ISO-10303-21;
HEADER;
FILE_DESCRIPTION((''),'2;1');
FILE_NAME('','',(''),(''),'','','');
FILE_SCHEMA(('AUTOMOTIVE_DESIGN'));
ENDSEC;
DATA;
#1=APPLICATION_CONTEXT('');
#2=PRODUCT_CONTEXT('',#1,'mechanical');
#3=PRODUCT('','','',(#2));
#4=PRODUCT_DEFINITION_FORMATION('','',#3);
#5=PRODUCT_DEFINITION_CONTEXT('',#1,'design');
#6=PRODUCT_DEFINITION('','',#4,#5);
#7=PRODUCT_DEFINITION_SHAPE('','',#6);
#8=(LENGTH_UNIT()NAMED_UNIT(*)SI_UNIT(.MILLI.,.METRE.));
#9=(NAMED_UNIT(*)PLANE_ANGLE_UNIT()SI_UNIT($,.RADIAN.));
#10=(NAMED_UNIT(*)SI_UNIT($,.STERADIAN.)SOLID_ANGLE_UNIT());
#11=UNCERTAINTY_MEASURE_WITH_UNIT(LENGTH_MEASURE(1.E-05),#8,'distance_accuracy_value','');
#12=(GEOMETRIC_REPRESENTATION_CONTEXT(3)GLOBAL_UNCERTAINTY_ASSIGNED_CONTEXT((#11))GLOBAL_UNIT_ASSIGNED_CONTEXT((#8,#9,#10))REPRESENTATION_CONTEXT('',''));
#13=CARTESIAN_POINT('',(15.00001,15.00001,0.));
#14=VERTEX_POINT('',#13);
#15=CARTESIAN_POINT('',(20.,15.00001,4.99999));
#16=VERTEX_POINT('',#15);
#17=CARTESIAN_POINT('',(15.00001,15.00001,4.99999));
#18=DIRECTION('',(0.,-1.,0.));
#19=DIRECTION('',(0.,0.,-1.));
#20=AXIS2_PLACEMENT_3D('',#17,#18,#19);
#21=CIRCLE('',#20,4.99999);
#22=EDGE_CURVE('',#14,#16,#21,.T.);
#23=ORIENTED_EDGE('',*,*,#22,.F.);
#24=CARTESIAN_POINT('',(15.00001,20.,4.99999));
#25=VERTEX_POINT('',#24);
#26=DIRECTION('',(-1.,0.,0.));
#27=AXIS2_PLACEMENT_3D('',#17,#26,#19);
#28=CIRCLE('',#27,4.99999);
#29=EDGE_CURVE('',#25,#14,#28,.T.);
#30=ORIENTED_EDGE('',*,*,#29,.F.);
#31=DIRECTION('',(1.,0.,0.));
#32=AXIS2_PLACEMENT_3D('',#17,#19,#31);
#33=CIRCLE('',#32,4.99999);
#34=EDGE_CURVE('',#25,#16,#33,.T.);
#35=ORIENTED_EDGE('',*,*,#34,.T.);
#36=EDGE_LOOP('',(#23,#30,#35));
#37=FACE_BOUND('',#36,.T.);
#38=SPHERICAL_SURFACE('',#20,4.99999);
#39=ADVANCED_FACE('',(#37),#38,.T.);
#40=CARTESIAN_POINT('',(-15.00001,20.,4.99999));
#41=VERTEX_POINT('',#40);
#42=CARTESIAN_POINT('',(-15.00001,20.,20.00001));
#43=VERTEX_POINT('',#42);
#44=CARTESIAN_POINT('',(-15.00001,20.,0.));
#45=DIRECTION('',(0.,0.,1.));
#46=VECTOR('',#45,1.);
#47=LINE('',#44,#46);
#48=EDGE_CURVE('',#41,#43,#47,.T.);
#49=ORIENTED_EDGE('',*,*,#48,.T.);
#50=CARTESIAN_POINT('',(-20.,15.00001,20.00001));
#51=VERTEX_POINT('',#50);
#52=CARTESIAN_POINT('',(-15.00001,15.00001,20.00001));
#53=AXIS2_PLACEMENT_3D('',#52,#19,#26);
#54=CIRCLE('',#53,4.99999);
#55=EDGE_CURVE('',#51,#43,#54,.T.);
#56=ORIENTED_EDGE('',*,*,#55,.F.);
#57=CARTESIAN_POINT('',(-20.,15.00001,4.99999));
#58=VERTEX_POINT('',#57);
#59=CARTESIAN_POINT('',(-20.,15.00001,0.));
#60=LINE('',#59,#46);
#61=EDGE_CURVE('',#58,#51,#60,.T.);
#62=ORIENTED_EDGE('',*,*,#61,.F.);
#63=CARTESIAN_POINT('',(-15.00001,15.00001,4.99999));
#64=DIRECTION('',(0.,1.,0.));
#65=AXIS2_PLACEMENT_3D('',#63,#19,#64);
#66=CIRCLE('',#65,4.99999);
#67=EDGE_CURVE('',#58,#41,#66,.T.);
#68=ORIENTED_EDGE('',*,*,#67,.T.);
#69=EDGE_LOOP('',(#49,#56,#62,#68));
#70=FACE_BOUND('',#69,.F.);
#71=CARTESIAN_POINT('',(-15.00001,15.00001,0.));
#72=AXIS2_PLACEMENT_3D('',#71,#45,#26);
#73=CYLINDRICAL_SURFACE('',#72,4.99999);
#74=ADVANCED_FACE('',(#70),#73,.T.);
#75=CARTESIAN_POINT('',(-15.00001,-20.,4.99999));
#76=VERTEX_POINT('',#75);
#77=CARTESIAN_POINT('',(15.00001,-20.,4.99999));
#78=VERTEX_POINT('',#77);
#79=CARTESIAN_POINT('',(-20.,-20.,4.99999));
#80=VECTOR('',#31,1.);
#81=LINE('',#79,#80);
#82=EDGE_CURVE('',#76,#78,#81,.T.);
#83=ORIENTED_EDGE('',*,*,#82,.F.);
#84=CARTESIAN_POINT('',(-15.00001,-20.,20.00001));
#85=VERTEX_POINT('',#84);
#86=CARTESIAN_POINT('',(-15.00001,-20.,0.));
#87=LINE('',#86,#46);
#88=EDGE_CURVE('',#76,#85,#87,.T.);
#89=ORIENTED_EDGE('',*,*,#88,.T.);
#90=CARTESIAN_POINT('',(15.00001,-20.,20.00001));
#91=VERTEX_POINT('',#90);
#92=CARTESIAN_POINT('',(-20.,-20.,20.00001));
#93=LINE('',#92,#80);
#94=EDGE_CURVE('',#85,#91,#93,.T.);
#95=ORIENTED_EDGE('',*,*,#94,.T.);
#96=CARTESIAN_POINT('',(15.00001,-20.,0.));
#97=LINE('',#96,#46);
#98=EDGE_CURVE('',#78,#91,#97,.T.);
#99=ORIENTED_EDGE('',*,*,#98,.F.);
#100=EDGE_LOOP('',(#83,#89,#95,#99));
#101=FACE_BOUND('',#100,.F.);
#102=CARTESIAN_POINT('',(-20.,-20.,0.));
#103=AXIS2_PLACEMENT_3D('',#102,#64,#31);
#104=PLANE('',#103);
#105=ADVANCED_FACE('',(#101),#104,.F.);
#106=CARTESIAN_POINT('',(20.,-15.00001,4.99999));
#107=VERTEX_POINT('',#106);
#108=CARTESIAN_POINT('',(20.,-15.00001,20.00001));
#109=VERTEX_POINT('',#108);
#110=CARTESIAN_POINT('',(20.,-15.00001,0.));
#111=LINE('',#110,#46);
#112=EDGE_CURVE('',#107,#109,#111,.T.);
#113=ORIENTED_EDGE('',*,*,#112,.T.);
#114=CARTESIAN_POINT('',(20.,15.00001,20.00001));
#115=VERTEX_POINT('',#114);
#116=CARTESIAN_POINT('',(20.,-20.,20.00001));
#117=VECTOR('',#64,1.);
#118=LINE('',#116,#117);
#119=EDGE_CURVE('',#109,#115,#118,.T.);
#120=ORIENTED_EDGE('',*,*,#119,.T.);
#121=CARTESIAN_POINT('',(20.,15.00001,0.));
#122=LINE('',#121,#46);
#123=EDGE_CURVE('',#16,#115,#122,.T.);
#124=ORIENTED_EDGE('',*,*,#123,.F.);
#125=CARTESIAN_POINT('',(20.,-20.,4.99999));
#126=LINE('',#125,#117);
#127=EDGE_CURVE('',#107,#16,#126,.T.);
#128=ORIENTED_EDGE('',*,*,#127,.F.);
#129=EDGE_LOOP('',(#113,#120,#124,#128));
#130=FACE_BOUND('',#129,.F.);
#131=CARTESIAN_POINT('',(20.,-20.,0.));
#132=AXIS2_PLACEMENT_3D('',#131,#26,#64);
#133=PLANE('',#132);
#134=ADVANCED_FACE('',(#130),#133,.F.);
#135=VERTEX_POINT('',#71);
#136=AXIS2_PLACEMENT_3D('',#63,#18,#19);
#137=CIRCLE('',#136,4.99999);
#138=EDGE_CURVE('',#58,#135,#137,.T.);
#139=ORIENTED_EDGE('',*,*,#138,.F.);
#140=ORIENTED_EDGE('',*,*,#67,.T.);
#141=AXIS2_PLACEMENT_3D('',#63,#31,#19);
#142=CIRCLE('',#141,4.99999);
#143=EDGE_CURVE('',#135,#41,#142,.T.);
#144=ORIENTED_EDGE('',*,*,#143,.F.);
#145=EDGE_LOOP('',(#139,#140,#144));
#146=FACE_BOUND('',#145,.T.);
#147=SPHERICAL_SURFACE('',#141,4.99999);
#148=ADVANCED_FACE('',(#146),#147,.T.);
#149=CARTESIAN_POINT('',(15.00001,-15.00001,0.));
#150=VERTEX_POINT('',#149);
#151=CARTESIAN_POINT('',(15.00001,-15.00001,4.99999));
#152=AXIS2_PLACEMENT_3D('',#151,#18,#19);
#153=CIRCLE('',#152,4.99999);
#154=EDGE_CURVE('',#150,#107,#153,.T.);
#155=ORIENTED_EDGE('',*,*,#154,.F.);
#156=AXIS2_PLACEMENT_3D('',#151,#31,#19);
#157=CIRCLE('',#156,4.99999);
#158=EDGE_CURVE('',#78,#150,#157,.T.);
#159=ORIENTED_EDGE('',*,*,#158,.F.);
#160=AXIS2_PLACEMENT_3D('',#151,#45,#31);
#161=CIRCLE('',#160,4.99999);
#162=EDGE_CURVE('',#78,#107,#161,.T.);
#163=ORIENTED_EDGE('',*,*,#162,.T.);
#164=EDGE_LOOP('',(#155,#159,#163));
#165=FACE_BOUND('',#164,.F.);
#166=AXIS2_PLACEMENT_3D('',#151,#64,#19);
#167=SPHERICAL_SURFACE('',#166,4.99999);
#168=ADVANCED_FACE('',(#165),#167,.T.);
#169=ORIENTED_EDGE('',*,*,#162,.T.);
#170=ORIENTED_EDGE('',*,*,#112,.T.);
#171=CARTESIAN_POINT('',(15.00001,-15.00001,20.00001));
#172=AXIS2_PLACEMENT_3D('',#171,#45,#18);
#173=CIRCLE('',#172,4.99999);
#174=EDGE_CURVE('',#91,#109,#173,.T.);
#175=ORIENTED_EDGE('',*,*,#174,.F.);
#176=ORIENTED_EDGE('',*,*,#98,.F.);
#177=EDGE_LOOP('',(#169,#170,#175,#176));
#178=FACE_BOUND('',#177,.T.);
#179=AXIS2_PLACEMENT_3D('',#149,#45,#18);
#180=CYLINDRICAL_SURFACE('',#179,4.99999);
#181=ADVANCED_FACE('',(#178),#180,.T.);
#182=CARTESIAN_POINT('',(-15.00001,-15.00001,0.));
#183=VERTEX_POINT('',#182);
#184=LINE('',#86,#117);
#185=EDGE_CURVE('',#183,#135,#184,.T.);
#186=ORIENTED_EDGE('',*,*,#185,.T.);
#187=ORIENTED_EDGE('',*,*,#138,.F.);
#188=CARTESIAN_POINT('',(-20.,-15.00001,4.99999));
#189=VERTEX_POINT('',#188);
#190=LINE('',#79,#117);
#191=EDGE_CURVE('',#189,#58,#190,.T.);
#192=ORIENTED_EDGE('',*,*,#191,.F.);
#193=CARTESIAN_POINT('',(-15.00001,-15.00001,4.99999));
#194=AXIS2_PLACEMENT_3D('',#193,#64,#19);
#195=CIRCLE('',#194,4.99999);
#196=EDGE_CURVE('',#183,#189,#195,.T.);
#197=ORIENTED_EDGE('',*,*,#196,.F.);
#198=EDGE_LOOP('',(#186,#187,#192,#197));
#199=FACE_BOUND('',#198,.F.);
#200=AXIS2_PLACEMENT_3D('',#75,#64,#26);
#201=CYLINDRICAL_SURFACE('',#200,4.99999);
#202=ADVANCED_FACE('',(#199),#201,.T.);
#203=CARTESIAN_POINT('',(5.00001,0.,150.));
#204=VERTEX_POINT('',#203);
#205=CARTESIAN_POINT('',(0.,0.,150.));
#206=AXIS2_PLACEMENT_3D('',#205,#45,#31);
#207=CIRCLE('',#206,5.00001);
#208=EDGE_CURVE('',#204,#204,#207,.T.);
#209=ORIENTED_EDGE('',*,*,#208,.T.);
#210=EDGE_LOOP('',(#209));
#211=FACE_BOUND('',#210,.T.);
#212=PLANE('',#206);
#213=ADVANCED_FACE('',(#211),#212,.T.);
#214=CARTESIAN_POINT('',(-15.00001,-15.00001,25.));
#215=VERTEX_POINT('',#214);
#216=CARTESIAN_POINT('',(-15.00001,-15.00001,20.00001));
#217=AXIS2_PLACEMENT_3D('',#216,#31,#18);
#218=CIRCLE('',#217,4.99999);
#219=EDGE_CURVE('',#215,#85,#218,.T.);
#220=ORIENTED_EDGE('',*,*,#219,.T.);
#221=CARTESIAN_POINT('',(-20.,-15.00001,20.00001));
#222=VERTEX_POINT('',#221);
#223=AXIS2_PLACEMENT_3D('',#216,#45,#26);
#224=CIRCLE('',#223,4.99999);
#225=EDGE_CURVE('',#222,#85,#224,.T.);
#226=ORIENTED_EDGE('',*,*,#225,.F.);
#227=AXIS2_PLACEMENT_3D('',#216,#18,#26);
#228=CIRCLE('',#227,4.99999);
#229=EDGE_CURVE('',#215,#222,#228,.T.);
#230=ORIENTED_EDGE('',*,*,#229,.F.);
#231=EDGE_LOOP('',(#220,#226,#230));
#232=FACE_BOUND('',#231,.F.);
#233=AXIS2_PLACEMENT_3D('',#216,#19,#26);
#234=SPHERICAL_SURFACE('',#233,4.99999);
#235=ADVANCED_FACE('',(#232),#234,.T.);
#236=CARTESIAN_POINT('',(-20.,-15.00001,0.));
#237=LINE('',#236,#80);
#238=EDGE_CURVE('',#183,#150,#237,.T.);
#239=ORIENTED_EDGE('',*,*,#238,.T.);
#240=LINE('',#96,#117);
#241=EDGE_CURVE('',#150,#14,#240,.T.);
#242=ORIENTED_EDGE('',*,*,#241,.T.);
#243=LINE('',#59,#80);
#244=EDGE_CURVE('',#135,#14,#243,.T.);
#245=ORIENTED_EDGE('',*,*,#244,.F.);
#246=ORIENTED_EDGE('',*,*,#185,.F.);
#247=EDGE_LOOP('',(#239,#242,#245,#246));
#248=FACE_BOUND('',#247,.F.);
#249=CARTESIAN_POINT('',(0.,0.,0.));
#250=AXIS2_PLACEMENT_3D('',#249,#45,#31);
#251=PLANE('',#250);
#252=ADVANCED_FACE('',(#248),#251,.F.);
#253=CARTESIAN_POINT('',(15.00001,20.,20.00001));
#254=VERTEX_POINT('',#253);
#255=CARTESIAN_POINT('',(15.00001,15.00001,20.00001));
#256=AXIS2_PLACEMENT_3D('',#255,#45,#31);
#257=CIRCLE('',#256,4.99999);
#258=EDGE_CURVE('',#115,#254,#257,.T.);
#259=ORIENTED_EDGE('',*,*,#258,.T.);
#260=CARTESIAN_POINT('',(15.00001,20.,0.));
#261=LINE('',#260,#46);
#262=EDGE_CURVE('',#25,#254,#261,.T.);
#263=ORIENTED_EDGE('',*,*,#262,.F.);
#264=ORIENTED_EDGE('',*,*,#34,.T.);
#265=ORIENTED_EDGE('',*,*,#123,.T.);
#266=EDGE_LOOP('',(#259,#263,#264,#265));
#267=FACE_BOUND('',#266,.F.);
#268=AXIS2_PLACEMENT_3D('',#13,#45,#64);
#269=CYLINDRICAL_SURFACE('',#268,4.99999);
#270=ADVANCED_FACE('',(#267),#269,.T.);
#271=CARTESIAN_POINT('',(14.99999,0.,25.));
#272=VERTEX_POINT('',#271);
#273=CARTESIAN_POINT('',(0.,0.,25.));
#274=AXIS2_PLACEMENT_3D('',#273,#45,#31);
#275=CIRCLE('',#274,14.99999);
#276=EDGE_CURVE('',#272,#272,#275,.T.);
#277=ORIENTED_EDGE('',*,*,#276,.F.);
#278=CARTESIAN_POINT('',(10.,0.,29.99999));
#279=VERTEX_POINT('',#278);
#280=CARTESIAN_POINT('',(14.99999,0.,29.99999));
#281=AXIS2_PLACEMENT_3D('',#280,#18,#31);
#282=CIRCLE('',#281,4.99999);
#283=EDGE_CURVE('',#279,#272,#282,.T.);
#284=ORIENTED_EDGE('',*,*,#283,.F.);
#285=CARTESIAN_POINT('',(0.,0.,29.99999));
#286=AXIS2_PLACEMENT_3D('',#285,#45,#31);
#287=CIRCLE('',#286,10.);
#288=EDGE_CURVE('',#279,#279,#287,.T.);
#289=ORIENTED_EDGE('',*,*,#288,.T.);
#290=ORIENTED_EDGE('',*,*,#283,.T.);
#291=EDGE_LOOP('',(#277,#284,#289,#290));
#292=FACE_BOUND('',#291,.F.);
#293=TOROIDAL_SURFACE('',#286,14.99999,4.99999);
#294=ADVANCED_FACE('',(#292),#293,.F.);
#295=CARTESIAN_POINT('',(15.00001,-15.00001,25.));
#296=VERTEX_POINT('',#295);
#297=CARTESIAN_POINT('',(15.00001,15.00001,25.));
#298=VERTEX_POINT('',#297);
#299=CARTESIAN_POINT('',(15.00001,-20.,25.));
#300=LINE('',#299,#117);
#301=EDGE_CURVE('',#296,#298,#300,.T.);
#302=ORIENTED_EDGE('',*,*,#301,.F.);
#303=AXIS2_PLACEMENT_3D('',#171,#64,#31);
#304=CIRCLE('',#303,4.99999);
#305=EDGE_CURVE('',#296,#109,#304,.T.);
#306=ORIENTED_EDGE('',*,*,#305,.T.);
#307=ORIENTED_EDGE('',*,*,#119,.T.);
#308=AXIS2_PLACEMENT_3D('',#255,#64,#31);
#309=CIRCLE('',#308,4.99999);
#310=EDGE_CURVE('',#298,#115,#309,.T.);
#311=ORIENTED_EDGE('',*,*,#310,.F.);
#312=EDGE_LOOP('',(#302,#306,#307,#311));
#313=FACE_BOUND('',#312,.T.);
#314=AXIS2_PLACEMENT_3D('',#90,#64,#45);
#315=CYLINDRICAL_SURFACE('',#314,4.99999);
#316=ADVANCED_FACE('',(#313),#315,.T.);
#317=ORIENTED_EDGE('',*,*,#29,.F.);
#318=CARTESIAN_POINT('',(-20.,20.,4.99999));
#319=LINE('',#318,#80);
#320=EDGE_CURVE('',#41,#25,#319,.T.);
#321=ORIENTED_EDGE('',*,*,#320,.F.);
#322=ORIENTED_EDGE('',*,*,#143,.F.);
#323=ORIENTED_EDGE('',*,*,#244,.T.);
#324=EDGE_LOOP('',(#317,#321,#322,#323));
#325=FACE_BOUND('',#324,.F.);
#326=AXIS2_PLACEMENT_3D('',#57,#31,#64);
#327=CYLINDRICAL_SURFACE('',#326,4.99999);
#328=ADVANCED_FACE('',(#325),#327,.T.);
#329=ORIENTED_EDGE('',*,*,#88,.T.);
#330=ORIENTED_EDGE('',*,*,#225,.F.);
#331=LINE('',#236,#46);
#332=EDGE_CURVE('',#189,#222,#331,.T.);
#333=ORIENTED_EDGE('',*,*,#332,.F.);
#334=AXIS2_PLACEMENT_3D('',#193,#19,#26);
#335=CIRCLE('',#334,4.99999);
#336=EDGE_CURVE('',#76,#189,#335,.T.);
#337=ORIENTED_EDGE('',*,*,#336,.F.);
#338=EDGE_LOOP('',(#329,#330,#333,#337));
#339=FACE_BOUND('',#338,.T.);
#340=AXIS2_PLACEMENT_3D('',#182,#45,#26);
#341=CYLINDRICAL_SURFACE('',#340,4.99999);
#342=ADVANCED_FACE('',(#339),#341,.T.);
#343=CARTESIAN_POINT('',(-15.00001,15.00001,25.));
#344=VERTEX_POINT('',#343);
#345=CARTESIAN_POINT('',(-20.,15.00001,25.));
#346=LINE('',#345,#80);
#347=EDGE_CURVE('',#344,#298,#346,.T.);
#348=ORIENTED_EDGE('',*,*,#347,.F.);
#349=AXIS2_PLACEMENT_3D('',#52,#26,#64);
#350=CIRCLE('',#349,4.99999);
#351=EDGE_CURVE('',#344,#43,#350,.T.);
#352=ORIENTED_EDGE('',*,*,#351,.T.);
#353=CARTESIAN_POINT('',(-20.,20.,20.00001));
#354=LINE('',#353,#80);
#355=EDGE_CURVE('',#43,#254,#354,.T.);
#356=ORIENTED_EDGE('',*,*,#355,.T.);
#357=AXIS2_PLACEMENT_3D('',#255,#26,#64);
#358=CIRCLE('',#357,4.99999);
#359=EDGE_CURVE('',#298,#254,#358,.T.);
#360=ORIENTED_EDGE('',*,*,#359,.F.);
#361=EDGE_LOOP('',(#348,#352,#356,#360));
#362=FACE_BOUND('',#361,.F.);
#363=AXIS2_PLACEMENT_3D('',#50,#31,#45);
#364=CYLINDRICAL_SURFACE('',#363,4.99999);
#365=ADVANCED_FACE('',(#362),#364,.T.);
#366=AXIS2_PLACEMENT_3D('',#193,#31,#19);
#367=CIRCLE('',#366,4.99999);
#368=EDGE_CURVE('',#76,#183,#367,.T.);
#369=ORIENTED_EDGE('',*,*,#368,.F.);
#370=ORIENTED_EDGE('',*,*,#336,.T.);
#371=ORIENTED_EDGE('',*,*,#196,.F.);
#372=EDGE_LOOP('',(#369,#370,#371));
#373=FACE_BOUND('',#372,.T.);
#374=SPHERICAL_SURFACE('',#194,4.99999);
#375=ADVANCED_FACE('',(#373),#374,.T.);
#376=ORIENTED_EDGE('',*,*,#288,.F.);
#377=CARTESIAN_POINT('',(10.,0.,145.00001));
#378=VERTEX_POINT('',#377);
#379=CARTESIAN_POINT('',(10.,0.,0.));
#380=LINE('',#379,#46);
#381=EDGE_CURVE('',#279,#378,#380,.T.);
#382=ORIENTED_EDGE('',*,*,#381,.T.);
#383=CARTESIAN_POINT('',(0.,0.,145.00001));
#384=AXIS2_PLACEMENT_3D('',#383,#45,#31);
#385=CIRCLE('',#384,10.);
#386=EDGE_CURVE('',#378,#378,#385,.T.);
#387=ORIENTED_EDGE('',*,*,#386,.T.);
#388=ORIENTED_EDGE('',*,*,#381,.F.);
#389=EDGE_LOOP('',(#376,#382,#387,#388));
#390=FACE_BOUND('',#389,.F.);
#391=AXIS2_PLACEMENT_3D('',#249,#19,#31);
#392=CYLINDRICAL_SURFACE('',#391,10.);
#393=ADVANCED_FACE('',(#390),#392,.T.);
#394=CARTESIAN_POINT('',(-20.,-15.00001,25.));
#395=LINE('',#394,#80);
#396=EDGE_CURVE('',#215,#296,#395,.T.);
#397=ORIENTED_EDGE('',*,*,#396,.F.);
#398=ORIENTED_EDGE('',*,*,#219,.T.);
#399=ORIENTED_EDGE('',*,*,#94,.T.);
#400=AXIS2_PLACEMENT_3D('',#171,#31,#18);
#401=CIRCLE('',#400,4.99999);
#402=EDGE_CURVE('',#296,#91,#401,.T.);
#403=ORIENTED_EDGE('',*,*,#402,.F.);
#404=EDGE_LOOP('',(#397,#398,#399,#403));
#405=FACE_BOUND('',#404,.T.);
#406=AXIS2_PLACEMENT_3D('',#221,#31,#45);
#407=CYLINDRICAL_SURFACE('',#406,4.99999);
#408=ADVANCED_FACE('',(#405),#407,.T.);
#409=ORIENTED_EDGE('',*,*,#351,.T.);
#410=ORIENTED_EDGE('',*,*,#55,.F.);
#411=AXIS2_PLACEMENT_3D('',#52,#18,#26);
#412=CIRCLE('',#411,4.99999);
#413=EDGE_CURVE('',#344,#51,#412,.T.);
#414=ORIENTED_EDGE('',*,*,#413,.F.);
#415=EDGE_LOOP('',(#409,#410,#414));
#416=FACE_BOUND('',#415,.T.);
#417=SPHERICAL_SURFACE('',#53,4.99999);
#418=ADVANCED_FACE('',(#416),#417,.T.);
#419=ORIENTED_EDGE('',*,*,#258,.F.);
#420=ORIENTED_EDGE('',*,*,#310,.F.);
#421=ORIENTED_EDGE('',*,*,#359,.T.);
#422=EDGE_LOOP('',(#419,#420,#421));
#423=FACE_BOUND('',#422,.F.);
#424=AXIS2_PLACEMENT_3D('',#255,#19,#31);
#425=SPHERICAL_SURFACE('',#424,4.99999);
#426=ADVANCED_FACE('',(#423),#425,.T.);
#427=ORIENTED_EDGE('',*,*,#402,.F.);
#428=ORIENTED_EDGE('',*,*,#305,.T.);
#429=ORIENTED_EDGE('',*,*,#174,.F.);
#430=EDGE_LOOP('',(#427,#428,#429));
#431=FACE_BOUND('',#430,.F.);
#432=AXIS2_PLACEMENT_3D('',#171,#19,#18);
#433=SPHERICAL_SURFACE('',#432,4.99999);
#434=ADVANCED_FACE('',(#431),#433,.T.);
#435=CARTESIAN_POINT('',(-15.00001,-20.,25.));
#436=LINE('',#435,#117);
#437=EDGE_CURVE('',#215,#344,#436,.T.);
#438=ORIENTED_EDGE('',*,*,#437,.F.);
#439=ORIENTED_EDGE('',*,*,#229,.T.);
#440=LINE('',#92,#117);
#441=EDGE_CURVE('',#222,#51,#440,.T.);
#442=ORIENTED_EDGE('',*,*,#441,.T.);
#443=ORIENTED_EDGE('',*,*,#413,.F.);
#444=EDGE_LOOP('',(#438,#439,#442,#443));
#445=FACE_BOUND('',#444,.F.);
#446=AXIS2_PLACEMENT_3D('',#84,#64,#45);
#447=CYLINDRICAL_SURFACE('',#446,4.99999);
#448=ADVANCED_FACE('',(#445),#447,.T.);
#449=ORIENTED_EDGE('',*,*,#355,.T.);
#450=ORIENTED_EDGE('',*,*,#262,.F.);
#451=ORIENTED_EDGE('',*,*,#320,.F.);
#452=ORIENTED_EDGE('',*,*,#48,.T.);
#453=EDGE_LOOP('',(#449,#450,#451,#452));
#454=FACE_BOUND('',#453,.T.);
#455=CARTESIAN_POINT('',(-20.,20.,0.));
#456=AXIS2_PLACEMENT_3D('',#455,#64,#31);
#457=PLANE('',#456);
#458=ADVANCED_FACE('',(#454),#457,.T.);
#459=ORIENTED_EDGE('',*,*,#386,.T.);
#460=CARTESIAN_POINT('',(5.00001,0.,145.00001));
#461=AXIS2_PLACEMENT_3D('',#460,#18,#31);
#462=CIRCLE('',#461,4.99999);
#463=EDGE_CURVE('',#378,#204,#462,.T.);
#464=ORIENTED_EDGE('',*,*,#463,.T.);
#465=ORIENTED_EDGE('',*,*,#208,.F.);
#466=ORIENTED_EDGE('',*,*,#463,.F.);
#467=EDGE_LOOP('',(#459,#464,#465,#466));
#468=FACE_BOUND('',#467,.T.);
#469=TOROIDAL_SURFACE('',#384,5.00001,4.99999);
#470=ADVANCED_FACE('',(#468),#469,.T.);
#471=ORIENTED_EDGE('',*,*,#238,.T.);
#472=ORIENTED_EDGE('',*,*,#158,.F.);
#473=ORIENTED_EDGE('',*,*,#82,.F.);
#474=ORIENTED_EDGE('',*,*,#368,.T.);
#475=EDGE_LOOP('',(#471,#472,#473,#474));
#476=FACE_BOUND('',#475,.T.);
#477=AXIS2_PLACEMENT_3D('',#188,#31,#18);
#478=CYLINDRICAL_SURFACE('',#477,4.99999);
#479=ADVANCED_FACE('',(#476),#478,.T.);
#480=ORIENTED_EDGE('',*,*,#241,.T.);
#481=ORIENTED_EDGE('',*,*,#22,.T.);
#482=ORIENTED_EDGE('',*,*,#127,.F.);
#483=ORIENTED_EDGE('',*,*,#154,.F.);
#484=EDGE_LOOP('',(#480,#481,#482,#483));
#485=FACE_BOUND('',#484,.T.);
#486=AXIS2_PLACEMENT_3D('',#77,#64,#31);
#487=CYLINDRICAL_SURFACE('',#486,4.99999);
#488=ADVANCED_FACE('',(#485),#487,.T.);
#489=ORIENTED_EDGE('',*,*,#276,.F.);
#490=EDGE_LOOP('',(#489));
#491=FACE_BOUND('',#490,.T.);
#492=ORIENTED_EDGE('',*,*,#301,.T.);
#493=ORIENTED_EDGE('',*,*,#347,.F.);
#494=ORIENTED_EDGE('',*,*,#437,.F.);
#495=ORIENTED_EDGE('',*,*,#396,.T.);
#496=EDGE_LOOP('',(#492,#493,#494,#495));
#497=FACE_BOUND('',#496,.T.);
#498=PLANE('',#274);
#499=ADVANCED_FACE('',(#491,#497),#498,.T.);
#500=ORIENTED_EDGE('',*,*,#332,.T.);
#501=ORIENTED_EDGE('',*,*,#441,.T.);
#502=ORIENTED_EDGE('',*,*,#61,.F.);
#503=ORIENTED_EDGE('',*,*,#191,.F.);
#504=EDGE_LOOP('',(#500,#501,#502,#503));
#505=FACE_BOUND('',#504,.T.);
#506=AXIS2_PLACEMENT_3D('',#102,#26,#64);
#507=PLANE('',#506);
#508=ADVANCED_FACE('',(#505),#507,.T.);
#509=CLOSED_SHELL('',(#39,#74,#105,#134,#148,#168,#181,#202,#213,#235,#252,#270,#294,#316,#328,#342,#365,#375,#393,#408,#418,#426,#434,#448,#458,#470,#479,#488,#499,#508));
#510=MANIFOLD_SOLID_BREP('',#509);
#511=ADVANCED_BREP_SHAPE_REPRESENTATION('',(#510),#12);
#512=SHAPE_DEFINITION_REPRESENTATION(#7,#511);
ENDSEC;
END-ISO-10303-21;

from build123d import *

# Parameters (mm, degrees)
F0_W     = 40
F0_H     = 40
F0_R     = 10
F1_DEPTH = 25
F2_DEPTH = 150
F3_R     = 4.99999


# Not quite as in the source:
# - a fillet or chamfer is up to 0.001 mm smaller than in the source, because OpenCascade refuses the exact size


with BuildPart() as f1:
    # F0 (on Top) → F1 (new body)
    with BuildSketch(Plane.XY):
        Rectangle(F0_W, F0_H)
        Circle(F0_R, mode=Mode.SUBTRACT)
    extrude(amount=F1_DEPTH)

    # F0 (on Top) → F2 (join)
    with BuildSketch(Plane.XY):
        Circle(F0_R)
    extrude(amount=F2_DEPTH)

    # F3 (radius 5 in the source; OpenCascade refuses exactly that, so slightly less here)
    f3_edges = [f1.edges().sort_by_distance(p)[0] for p in [
        (20, 0, 0),
        (0, 20, 0),
        (-20, 0, 0),
        (0, -20, 0),
        (-20, 20, 12.5),
        (-20, -20, 12.5),
        (-20, 0, 25),
        (20, -20, 12.5),
        (0, -20, 25),
        (-10, 0, 25),
        (10, 0, 87.5),
        (-10, 0, 150),
        (20, 20, 12.5),
        (20, 0, 25),
        (0, 20, 25),
    ]]
    fillet(f3_edges, radius=F3_R)


solid = f1.part
